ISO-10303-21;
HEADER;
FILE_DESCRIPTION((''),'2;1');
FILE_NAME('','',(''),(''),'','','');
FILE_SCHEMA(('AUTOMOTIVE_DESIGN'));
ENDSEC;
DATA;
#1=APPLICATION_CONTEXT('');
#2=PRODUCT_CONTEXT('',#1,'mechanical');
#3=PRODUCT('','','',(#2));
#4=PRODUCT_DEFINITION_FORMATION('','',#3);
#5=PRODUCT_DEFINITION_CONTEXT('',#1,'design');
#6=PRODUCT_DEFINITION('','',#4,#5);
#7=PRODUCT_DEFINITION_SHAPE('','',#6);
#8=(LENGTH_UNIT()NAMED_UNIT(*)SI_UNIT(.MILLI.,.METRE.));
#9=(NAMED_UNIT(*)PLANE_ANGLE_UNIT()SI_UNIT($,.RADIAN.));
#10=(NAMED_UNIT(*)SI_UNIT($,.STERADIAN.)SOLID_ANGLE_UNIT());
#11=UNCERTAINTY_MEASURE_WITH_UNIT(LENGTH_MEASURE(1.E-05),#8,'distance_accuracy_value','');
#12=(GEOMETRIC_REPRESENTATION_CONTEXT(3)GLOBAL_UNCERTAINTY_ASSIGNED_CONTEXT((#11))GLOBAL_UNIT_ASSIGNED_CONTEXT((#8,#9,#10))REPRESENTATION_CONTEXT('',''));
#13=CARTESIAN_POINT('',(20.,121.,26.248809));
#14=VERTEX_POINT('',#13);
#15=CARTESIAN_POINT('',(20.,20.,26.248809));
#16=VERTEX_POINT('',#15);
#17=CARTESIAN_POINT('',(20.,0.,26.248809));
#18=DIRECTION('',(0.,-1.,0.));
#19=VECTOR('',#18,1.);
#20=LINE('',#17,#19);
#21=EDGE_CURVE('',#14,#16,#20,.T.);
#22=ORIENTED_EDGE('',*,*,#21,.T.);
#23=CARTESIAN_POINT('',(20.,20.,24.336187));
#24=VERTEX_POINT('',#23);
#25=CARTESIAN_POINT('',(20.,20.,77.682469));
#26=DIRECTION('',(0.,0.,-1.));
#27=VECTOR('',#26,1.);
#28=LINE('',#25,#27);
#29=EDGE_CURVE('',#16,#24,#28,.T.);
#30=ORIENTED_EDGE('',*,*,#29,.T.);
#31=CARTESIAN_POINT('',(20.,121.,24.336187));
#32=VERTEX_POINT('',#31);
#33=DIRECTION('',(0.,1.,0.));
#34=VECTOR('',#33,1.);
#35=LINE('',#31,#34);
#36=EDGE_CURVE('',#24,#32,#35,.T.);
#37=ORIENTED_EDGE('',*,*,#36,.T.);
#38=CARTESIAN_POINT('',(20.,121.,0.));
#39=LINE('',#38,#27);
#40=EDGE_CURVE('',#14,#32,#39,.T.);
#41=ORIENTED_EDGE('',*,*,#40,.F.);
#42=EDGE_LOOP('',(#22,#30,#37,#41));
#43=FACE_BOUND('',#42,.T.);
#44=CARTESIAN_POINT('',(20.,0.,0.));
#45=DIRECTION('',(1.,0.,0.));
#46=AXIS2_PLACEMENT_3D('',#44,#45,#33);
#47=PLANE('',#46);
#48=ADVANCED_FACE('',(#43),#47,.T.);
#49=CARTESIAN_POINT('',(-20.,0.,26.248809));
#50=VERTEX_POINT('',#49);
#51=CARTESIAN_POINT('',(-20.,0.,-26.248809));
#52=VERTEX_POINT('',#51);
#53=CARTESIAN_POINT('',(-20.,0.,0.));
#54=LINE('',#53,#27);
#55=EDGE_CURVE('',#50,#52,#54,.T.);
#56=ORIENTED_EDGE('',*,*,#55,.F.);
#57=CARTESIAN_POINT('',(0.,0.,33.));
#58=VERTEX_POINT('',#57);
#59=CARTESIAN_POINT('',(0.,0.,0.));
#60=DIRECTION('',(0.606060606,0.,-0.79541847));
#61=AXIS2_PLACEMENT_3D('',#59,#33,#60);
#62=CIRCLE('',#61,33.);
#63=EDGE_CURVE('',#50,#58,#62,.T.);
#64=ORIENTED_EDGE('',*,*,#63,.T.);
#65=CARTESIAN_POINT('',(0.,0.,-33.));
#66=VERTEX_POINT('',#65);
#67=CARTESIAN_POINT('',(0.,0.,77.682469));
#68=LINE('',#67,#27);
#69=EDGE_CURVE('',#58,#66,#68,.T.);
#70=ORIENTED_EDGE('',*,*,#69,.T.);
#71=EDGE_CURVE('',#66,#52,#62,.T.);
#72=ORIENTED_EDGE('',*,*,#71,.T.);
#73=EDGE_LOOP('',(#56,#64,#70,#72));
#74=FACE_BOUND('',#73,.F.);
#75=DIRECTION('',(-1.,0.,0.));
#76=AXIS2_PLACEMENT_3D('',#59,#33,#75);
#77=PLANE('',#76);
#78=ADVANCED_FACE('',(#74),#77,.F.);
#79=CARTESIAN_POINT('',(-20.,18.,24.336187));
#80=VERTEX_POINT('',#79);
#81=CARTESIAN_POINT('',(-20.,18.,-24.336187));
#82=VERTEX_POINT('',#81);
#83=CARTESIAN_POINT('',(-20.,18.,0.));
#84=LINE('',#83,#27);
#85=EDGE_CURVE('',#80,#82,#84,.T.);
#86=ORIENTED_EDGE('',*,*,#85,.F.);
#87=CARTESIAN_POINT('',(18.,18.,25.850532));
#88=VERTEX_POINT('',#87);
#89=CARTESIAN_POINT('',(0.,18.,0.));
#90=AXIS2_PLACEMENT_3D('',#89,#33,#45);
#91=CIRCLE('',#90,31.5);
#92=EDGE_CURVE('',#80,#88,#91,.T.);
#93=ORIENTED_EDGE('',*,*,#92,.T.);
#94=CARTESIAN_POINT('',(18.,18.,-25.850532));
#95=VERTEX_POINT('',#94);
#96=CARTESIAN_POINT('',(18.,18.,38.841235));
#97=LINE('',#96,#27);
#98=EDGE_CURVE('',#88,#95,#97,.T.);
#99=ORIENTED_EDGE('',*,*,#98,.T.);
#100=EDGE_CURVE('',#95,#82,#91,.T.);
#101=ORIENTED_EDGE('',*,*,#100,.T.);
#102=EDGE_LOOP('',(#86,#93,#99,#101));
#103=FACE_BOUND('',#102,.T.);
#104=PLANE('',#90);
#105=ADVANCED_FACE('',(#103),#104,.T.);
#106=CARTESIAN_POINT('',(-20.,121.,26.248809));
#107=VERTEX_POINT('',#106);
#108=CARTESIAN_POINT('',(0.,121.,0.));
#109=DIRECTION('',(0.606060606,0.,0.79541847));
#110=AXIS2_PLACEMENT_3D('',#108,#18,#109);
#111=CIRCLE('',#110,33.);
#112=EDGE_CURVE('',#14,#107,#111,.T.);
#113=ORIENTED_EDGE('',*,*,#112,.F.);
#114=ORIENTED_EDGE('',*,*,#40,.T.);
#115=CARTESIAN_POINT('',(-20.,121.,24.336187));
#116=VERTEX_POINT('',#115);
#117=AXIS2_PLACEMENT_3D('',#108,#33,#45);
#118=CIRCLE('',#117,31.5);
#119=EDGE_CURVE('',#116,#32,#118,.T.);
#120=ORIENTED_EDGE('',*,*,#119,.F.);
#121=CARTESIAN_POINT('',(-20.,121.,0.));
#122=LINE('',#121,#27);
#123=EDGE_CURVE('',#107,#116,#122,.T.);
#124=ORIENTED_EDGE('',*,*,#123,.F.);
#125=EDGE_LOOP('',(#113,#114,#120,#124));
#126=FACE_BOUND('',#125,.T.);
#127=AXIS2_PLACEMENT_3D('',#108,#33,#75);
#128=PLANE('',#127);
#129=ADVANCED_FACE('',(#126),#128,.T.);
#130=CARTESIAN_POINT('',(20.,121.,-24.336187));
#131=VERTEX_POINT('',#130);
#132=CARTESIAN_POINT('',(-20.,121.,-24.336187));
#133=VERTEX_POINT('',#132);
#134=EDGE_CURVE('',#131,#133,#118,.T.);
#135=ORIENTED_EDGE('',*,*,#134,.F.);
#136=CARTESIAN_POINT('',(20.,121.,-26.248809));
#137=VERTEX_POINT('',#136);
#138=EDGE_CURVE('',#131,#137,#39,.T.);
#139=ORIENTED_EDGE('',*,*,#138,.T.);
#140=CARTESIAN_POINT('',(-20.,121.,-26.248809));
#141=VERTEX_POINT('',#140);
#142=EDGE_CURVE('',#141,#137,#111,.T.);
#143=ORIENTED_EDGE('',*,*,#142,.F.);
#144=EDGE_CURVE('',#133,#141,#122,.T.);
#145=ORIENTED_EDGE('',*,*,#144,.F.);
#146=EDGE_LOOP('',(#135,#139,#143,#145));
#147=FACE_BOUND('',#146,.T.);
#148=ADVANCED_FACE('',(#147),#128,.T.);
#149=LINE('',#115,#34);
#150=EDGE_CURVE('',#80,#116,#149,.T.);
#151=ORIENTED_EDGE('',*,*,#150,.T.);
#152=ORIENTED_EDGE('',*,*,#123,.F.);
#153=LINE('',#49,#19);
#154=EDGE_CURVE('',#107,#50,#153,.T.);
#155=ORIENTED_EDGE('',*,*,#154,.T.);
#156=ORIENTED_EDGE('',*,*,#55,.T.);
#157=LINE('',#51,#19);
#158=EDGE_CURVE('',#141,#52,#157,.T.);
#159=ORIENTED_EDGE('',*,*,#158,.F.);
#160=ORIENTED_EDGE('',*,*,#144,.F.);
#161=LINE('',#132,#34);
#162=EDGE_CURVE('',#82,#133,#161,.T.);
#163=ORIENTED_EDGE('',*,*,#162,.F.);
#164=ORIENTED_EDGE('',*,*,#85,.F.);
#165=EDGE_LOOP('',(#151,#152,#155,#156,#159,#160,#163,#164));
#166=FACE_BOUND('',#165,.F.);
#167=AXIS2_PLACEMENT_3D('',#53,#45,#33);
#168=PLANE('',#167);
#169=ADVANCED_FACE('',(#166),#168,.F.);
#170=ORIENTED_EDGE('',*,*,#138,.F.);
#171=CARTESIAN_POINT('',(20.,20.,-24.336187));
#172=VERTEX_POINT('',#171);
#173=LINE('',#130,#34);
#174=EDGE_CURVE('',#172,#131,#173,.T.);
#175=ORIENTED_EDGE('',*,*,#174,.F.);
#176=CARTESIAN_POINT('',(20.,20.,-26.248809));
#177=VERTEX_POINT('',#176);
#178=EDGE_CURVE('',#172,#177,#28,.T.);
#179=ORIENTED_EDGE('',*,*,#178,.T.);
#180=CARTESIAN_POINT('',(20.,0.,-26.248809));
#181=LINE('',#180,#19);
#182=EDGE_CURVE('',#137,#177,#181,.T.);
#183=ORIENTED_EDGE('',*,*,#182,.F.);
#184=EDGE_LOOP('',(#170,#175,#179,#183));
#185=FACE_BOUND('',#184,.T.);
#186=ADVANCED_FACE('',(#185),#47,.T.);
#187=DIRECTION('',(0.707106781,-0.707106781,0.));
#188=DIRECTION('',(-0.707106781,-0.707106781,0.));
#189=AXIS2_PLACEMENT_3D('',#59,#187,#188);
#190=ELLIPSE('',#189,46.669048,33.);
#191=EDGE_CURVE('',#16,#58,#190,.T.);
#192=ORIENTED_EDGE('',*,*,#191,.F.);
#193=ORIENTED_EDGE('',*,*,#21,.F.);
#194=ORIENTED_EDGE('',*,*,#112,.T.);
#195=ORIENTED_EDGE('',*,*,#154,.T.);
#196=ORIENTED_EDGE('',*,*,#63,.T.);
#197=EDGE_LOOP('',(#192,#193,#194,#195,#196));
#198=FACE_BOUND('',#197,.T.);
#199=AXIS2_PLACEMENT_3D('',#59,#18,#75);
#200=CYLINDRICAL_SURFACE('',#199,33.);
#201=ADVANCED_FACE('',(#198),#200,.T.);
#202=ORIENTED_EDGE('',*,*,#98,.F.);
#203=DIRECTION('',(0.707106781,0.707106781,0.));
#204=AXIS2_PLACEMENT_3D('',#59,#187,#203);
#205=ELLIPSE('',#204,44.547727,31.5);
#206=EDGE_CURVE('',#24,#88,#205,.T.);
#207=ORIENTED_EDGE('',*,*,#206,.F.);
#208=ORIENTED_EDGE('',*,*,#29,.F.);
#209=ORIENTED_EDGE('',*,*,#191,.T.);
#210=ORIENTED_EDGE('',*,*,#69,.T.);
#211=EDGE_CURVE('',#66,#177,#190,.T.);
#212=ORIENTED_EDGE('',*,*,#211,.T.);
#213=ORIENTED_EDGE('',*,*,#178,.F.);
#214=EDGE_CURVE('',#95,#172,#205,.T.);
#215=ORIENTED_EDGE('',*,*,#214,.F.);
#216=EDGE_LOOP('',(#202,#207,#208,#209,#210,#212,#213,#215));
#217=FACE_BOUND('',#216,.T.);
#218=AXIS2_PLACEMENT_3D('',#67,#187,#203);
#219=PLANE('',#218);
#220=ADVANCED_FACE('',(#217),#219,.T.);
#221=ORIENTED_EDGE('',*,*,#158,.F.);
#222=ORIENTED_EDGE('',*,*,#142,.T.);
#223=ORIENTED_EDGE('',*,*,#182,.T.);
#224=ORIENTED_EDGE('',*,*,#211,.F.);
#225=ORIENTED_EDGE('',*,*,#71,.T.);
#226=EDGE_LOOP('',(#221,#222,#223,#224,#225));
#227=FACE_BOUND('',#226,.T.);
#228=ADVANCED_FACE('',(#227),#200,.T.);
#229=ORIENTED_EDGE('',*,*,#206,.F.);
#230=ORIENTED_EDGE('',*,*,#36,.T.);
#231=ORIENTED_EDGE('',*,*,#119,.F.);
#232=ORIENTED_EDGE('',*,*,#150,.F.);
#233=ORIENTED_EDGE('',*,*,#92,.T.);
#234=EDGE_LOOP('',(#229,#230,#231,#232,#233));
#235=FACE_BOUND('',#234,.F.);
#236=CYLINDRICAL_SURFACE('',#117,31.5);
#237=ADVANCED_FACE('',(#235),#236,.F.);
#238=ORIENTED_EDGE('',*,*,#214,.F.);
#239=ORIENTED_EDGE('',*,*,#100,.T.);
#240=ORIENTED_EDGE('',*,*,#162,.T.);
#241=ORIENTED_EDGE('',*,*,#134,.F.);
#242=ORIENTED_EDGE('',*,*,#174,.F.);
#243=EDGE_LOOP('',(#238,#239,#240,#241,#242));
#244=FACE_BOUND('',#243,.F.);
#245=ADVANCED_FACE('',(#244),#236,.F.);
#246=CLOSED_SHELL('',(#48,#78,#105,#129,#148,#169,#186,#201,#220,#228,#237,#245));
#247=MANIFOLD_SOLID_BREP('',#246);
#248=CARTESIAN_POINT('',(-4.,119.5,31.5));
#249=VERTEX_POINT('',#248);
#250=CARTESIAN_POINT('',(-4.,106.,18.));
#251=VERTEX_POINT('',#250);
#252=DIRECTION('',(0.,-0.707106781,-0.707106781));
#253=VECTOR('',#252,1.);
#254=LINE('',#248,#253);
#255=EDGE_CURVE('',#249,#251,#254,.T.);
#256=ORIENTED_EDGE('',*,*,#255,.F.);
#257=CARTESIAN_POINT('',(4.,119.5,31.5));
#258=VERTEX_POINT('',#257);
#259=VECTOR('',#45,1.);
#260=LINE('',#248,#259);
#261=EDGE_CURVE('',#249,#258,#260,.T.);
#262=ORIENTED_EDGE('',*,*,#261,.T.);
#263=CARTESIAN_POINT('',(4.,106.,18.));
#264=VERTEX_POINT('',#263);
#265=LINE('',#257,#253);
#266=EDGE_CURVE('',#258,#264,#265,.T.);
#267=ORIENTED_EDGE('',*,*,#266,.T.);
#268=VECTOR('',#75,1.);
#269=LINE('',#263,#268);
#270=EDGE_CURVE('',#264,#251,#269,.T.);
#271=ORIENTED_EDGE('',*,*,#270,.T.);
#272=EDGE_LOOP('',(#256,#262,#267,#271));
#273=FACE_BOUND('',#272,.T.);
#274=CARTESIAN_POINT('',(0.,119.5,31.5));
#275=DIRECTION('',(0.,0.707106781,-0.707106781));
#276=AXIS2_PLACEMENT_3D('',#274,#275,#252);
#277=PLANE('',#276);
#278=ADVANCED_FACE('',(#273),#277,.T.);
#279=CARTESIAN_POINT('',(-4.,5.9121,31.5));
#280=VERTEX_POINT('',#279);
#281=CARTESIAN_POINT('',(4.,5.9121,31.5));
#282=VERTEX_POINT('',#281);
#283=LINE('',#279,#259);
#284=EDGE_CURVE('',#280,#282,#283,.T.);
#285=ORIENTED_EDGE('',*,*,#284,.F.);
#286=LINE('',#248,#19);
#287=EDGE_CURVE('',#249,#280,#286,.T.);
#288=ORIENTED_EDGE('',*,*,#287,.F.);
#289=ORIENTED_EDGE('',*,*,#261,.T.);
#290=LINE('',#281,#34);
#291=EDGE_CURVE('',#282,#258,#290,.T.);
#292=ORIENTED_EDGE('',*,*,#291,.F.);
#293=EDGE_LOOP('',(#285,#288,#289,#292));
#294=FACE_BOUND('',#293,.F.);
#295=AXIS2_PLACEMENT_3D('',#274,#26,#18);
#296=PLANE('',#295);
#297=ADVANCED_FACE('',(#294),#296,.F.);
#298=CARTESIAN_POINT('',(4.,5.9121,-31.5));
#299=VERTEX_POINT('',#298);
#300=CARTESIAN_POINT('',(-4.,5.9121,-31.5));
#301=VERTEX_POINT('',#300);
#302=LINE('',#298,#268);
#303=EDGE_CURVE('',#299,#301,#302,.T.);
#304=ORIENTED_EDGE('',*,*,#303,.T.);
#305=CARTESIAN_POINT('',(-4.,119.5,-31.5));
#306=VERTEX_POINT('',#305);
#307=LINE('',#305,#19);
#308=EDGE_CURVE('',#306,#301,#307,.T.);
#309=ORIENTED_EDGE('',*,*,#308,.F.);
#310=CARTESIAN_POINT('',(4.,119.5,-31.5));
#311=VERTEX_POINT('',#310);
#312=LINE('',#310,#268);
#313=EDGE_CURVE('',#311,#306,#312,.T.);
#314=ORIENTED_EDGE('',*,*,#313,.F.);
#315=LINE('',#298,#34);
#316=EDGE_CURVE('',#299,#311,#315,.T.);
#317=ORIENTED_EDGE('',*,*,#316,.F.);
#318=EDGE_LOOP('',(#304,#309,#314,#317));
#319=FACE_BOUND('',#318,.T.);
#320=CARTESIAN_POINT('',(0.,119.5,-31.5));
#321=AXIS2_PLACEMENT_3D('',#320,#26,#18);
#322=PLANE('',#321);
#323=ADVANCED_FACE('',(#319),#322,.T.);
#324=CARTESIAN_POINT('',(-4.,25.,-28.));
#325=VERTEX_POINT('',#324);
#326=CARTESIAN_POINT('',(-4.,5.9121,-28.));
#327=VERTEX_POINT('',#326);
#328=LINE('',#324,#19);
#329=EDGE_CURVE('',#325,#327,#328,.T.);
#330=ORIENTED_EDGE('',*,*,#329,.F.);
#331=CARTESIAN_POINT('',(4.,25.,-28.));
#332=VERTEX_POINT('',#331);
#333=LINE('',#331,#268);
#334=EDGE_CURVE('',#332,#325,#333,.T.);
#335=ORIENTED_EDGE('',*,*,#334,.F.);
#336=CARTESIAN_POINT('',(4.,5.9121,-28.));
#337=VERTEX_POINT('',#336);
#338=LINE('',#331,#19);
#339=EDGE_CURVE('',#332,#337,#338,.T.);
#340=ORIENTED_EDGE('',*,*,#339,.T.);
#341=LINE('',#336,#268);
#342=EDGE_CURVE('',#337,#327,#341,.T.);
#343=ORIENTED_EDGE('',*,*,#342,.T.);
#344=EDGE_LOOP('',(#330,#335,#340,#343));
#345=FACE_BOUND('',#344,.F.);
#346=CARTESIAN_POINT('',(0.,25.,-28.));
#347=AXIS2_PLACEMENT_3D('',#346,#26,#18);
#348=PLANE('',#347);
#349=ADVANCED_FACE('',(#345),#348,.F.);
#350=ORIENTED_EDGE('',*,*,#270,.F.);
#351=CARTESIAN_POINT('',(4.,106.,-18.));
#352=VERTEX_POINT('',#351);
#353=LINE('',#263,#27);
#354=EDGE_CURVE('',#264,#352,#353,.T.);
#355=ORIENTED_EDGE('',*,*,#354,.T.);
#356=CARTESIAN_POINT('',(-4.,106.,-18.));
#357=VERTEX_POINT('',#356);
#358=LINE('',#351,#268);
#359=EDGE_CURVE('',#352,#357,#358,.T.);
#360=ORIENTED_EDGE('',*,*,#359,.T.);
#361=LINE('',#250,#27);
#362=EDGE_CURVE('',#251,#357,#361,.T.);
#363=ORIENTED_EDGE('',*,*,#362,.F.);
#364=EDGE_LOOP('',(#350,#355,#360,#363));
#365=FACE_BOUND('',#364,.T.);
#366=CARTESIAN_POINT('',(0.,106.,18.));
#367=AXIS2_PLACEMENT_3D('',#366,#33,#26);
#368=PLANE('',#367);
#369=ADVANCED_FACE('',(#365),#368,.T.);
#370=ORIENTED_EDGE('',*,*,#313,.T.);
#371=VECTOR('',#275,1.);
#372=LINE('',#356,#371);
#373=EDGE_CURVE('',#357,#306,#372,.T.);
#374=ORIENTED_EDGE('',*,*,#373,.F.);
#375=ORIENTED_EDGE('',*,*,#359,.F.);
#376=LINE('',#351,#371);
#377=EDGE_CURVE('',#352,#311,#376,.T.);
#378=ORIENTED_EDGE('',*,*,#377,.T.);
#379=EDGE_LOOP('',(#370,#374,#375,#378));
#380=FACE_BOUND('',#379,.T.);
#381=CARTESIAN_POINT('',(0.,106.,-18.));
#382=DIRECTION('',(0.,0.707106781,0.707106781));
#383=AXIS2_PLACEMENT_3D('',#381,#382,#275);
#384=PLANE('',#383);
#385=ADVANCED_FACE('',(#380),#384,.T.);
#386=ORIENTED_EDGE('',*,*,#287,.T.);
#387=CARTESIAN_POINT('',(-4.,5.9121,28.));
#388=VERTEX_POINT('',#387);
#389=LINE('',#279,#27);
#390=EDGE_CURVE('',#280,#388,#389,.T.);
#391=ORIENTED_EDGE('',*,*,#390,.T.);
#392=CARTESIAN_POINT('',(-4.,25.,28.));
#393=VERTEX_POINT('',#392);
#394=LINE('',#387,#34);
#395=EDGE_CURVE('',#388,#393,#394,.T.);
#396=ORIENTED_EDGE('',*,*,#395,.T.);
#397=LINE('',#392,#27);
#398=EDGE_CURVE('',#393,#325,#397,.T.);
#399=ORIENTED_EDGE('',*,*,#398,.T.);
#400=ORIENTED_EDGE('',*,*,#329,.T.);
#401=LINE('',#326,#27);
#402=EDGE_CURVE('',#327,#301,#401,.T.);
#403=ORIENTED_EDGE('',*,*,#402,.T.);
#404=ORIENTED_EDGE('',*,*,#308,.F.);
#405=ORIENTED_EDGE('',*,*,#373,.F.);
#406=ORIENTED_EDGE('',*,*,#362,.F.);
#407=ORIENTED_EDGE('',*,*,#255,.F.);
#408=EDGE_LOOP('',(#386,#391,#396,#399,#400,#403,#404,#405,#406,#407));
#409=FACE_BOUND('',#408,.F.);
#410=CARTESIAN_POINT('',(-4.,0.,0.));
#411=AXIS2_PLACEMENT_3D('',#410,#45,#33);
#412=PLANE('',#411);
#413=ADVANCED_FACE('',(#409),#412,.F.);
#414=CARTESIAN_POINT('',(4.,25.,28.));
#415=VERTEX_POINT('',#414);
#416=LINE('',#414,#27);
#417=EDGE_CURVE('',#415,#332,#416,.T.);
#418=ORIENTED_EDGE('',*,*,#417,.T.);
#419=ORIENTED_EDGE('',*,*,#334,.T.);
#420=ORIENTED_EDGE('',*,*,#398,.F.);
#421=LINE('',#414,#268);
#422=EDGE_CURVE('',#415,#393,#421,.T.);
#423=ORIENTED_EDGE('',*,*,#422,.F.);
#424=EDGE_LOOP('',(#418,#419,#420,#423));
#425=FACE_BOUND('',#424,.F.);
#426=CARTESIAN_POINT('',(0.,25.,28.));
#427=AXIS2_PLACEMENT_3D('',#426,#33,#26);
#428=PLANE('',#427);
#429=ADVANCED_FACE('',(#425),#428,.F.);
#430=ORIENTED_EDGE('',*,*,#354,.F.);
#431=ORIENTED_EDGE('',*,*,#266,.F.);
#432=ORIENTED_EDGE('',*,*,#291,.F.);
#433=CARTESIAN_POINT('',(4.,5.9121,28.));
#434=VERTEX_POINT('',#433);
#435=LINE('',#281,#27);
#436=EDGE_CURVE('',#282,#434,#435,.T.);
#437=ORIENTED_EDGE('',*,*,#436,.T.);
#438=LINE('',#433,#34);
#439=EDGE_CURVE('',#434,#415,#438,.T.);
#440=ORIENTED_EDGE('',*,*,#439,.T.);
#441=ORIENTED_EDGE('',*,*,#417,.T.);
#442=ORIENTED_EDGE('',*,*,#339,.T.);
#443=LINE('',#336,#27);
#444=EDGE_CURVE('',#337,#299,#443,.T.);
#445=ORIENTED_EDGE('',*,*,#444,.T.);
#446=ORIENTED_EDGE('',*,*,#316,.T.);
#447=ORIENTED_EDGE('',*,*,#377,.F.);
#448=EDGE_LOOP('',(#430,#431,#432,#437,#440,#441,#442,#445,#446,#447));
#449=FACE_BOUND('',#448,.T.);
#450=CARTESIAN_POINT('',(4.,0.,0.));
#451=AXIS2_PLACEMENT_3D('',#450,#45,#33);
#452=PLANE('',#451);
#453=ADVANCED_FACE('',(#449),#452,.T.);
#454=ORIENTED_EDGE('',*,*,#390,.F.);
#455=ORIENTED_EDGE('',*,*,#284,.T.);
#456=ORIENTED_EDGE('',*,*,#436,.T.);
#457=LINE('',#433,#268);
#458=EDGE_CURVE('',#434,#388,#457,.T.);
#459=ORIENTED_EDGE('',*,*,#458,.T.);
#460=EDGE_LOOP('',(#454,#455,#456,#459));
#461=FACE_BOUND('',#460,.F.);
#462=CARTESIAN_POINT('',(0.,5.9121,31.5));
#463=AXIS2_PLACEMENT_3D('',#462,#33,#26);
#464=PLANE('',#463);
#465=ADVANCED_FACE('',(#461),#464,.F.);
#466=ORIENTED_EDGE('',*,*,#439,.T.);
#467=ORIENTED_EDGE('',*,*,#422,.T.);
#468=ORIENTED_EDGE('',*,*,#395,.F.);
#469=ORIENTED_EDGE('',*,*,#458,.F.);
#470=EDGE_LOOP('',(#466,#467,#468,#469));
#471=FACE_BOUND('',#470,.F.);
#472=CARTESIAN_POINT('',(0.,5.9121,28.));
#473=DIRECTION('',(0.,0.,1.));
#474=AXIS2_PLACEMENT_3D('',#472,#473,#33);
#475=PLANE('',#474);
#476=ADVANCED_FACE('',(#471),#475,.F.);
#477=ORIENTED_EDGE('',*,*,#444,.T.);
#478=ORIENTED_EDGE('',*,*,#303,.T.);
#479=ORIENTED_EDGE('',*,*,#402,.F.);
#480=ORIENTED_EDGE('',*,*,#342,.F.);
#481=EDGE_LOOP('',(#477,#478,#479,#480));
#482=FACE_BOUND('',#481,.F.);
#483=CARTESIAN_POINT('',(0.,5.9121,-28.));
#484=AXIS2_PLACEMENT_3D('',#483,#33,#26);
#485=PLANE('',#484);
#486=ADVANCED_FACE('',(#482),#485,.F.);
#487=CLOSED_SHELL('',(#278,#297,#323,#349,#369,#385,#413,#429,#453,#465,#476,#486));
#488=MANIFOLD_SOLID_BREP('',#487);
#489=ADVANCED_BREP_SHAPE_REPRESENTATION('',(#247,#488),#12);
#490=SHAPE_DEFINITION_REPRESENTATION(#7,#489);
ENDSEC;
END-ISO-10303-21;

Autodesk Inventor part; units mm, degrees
ref_plane "XZ Plane" through (0, 0, 0) normal (0, 1, 0) x (-1, 0, 0)
sketch "Sketch1" plane through (0, 0, 0) normal (0, 1, 0) x (-1, 0, 0)
  circle A0 centre (0, 0) radius 33
  dimension "d0" = 66
extrude "Extrusion1" add sketch "Sketch1" along normal blind 121
sketch "Sketch2" plane through (0, 121, 0) normal (0, 1, 0) x (1, 0, 0)
  circle A0 centre (0, 0) radius 31.5
  dimension "d3" = 63
extrude "Extrusion2" cut sketch "Sketch2" against normal blind 103
sketch "Sketch3" plane through (0, 0, 0) normal (1, 0, 0) x (0, 1, 0)
  line L0 (121, 31.5) -> (121, -31.5) projected
  line L1 (0, -33) -> (0, 33) projected
  line L2 (5.9121, 31.5) -> (5.9121, 28)
  line L3 (5.9121, 28) -> (25, 28)
  line L4 (25, 28) -> (25, -28)
  line L5 (25, -28) -> (5.9121, -28)
  line L6 (5.9121, -28) -> (5.9121, -31.5)
  line L7 (121, -33) -> (121, 33) projected
  line L8 (119.5, 31.5) -> (106, 18)
  line L9 (106, 18) -> (106, -18)
  line L10 (106, -18) -> (119.5, -31.5)
  line L11 (121, 31.5) -> (18, 31.5) projected
  line L12 (121, -31.5) -> (18, -31.5) projected
  line L13 (121, 31.5) -> (18, 31.5) projected
  line L14 (119.5, 31.5) -> (5.9121, 31.5)
  line L15 (5.9121, -31.5) -> (119.5, -31.5)
  line L16 (121, -31.5) -> (18, -31.5) projected
  point P0 (5.9121, -33)
  point P1 (25, 0)
  point P2 (121, 0)
  dimension "d13" = 25
  dimension "d17" = 15
  dimension "d19" = 15
  dimension "d33" = 3.5
extrude "Extrusion4" add sketch "Sketch3" along normal mid plane 8 separate body contours L8 L9 L10 L12 L15 L6 L5 L4 L3 L2 L14 L11
ref_plane "Work Plane1" through (20, 0, 0) normal (1, 0, 0) x (0, 1, 0)
ref_plane "Work Plane2" through (-20, 0, 0) normal (1, 0, 0) x (0, 1, 0)
sketch "Sketch4" plane through (20, 0, 0) normal (1, 0, 0) x (0, 1, 0)
  line L0 (-18.9358, -46.7949) -> (142.2545, -46.7949)
  line L1 (142.2545, -46.7949) -> (142.2545, 56.6765)
  line L2 (142.2545, 56.6765) -> (-18.9358, 56.6765)
  line L3 (-18.9358, 56.6765) -> (-18.9358, -46.7949)
  point P0 (0, 0)
extrude "Extrusion5" cut sketch "Sketch4" along normal blind 100 bodies 1
sketch "Sketch5" plane through (-20, 0, 0) normal (1, 0, 0) x (0, 1, 0)
  line L0 (136.7321, -48.8329) -> (-13.7148, -48.8329)
  line L1 (-13.7148, -48.8329) -> (-13.7148, 47.5861)
  line L2 (-13.7148, 47.5861) -> (136.7321, 47.5861)
  line L3 (136.7321, 47.5861) -> (136.7321, -48.8329)
  point P0 (0, 0)
extrude "Extrusion6" cut sketch "Sketch5" against normal blind 100 bodies 1
chamfer "Chamfer5" distance 20 angle 45 1 edges at (20, 0, 0)
properties part number "cansat_estructura3"
